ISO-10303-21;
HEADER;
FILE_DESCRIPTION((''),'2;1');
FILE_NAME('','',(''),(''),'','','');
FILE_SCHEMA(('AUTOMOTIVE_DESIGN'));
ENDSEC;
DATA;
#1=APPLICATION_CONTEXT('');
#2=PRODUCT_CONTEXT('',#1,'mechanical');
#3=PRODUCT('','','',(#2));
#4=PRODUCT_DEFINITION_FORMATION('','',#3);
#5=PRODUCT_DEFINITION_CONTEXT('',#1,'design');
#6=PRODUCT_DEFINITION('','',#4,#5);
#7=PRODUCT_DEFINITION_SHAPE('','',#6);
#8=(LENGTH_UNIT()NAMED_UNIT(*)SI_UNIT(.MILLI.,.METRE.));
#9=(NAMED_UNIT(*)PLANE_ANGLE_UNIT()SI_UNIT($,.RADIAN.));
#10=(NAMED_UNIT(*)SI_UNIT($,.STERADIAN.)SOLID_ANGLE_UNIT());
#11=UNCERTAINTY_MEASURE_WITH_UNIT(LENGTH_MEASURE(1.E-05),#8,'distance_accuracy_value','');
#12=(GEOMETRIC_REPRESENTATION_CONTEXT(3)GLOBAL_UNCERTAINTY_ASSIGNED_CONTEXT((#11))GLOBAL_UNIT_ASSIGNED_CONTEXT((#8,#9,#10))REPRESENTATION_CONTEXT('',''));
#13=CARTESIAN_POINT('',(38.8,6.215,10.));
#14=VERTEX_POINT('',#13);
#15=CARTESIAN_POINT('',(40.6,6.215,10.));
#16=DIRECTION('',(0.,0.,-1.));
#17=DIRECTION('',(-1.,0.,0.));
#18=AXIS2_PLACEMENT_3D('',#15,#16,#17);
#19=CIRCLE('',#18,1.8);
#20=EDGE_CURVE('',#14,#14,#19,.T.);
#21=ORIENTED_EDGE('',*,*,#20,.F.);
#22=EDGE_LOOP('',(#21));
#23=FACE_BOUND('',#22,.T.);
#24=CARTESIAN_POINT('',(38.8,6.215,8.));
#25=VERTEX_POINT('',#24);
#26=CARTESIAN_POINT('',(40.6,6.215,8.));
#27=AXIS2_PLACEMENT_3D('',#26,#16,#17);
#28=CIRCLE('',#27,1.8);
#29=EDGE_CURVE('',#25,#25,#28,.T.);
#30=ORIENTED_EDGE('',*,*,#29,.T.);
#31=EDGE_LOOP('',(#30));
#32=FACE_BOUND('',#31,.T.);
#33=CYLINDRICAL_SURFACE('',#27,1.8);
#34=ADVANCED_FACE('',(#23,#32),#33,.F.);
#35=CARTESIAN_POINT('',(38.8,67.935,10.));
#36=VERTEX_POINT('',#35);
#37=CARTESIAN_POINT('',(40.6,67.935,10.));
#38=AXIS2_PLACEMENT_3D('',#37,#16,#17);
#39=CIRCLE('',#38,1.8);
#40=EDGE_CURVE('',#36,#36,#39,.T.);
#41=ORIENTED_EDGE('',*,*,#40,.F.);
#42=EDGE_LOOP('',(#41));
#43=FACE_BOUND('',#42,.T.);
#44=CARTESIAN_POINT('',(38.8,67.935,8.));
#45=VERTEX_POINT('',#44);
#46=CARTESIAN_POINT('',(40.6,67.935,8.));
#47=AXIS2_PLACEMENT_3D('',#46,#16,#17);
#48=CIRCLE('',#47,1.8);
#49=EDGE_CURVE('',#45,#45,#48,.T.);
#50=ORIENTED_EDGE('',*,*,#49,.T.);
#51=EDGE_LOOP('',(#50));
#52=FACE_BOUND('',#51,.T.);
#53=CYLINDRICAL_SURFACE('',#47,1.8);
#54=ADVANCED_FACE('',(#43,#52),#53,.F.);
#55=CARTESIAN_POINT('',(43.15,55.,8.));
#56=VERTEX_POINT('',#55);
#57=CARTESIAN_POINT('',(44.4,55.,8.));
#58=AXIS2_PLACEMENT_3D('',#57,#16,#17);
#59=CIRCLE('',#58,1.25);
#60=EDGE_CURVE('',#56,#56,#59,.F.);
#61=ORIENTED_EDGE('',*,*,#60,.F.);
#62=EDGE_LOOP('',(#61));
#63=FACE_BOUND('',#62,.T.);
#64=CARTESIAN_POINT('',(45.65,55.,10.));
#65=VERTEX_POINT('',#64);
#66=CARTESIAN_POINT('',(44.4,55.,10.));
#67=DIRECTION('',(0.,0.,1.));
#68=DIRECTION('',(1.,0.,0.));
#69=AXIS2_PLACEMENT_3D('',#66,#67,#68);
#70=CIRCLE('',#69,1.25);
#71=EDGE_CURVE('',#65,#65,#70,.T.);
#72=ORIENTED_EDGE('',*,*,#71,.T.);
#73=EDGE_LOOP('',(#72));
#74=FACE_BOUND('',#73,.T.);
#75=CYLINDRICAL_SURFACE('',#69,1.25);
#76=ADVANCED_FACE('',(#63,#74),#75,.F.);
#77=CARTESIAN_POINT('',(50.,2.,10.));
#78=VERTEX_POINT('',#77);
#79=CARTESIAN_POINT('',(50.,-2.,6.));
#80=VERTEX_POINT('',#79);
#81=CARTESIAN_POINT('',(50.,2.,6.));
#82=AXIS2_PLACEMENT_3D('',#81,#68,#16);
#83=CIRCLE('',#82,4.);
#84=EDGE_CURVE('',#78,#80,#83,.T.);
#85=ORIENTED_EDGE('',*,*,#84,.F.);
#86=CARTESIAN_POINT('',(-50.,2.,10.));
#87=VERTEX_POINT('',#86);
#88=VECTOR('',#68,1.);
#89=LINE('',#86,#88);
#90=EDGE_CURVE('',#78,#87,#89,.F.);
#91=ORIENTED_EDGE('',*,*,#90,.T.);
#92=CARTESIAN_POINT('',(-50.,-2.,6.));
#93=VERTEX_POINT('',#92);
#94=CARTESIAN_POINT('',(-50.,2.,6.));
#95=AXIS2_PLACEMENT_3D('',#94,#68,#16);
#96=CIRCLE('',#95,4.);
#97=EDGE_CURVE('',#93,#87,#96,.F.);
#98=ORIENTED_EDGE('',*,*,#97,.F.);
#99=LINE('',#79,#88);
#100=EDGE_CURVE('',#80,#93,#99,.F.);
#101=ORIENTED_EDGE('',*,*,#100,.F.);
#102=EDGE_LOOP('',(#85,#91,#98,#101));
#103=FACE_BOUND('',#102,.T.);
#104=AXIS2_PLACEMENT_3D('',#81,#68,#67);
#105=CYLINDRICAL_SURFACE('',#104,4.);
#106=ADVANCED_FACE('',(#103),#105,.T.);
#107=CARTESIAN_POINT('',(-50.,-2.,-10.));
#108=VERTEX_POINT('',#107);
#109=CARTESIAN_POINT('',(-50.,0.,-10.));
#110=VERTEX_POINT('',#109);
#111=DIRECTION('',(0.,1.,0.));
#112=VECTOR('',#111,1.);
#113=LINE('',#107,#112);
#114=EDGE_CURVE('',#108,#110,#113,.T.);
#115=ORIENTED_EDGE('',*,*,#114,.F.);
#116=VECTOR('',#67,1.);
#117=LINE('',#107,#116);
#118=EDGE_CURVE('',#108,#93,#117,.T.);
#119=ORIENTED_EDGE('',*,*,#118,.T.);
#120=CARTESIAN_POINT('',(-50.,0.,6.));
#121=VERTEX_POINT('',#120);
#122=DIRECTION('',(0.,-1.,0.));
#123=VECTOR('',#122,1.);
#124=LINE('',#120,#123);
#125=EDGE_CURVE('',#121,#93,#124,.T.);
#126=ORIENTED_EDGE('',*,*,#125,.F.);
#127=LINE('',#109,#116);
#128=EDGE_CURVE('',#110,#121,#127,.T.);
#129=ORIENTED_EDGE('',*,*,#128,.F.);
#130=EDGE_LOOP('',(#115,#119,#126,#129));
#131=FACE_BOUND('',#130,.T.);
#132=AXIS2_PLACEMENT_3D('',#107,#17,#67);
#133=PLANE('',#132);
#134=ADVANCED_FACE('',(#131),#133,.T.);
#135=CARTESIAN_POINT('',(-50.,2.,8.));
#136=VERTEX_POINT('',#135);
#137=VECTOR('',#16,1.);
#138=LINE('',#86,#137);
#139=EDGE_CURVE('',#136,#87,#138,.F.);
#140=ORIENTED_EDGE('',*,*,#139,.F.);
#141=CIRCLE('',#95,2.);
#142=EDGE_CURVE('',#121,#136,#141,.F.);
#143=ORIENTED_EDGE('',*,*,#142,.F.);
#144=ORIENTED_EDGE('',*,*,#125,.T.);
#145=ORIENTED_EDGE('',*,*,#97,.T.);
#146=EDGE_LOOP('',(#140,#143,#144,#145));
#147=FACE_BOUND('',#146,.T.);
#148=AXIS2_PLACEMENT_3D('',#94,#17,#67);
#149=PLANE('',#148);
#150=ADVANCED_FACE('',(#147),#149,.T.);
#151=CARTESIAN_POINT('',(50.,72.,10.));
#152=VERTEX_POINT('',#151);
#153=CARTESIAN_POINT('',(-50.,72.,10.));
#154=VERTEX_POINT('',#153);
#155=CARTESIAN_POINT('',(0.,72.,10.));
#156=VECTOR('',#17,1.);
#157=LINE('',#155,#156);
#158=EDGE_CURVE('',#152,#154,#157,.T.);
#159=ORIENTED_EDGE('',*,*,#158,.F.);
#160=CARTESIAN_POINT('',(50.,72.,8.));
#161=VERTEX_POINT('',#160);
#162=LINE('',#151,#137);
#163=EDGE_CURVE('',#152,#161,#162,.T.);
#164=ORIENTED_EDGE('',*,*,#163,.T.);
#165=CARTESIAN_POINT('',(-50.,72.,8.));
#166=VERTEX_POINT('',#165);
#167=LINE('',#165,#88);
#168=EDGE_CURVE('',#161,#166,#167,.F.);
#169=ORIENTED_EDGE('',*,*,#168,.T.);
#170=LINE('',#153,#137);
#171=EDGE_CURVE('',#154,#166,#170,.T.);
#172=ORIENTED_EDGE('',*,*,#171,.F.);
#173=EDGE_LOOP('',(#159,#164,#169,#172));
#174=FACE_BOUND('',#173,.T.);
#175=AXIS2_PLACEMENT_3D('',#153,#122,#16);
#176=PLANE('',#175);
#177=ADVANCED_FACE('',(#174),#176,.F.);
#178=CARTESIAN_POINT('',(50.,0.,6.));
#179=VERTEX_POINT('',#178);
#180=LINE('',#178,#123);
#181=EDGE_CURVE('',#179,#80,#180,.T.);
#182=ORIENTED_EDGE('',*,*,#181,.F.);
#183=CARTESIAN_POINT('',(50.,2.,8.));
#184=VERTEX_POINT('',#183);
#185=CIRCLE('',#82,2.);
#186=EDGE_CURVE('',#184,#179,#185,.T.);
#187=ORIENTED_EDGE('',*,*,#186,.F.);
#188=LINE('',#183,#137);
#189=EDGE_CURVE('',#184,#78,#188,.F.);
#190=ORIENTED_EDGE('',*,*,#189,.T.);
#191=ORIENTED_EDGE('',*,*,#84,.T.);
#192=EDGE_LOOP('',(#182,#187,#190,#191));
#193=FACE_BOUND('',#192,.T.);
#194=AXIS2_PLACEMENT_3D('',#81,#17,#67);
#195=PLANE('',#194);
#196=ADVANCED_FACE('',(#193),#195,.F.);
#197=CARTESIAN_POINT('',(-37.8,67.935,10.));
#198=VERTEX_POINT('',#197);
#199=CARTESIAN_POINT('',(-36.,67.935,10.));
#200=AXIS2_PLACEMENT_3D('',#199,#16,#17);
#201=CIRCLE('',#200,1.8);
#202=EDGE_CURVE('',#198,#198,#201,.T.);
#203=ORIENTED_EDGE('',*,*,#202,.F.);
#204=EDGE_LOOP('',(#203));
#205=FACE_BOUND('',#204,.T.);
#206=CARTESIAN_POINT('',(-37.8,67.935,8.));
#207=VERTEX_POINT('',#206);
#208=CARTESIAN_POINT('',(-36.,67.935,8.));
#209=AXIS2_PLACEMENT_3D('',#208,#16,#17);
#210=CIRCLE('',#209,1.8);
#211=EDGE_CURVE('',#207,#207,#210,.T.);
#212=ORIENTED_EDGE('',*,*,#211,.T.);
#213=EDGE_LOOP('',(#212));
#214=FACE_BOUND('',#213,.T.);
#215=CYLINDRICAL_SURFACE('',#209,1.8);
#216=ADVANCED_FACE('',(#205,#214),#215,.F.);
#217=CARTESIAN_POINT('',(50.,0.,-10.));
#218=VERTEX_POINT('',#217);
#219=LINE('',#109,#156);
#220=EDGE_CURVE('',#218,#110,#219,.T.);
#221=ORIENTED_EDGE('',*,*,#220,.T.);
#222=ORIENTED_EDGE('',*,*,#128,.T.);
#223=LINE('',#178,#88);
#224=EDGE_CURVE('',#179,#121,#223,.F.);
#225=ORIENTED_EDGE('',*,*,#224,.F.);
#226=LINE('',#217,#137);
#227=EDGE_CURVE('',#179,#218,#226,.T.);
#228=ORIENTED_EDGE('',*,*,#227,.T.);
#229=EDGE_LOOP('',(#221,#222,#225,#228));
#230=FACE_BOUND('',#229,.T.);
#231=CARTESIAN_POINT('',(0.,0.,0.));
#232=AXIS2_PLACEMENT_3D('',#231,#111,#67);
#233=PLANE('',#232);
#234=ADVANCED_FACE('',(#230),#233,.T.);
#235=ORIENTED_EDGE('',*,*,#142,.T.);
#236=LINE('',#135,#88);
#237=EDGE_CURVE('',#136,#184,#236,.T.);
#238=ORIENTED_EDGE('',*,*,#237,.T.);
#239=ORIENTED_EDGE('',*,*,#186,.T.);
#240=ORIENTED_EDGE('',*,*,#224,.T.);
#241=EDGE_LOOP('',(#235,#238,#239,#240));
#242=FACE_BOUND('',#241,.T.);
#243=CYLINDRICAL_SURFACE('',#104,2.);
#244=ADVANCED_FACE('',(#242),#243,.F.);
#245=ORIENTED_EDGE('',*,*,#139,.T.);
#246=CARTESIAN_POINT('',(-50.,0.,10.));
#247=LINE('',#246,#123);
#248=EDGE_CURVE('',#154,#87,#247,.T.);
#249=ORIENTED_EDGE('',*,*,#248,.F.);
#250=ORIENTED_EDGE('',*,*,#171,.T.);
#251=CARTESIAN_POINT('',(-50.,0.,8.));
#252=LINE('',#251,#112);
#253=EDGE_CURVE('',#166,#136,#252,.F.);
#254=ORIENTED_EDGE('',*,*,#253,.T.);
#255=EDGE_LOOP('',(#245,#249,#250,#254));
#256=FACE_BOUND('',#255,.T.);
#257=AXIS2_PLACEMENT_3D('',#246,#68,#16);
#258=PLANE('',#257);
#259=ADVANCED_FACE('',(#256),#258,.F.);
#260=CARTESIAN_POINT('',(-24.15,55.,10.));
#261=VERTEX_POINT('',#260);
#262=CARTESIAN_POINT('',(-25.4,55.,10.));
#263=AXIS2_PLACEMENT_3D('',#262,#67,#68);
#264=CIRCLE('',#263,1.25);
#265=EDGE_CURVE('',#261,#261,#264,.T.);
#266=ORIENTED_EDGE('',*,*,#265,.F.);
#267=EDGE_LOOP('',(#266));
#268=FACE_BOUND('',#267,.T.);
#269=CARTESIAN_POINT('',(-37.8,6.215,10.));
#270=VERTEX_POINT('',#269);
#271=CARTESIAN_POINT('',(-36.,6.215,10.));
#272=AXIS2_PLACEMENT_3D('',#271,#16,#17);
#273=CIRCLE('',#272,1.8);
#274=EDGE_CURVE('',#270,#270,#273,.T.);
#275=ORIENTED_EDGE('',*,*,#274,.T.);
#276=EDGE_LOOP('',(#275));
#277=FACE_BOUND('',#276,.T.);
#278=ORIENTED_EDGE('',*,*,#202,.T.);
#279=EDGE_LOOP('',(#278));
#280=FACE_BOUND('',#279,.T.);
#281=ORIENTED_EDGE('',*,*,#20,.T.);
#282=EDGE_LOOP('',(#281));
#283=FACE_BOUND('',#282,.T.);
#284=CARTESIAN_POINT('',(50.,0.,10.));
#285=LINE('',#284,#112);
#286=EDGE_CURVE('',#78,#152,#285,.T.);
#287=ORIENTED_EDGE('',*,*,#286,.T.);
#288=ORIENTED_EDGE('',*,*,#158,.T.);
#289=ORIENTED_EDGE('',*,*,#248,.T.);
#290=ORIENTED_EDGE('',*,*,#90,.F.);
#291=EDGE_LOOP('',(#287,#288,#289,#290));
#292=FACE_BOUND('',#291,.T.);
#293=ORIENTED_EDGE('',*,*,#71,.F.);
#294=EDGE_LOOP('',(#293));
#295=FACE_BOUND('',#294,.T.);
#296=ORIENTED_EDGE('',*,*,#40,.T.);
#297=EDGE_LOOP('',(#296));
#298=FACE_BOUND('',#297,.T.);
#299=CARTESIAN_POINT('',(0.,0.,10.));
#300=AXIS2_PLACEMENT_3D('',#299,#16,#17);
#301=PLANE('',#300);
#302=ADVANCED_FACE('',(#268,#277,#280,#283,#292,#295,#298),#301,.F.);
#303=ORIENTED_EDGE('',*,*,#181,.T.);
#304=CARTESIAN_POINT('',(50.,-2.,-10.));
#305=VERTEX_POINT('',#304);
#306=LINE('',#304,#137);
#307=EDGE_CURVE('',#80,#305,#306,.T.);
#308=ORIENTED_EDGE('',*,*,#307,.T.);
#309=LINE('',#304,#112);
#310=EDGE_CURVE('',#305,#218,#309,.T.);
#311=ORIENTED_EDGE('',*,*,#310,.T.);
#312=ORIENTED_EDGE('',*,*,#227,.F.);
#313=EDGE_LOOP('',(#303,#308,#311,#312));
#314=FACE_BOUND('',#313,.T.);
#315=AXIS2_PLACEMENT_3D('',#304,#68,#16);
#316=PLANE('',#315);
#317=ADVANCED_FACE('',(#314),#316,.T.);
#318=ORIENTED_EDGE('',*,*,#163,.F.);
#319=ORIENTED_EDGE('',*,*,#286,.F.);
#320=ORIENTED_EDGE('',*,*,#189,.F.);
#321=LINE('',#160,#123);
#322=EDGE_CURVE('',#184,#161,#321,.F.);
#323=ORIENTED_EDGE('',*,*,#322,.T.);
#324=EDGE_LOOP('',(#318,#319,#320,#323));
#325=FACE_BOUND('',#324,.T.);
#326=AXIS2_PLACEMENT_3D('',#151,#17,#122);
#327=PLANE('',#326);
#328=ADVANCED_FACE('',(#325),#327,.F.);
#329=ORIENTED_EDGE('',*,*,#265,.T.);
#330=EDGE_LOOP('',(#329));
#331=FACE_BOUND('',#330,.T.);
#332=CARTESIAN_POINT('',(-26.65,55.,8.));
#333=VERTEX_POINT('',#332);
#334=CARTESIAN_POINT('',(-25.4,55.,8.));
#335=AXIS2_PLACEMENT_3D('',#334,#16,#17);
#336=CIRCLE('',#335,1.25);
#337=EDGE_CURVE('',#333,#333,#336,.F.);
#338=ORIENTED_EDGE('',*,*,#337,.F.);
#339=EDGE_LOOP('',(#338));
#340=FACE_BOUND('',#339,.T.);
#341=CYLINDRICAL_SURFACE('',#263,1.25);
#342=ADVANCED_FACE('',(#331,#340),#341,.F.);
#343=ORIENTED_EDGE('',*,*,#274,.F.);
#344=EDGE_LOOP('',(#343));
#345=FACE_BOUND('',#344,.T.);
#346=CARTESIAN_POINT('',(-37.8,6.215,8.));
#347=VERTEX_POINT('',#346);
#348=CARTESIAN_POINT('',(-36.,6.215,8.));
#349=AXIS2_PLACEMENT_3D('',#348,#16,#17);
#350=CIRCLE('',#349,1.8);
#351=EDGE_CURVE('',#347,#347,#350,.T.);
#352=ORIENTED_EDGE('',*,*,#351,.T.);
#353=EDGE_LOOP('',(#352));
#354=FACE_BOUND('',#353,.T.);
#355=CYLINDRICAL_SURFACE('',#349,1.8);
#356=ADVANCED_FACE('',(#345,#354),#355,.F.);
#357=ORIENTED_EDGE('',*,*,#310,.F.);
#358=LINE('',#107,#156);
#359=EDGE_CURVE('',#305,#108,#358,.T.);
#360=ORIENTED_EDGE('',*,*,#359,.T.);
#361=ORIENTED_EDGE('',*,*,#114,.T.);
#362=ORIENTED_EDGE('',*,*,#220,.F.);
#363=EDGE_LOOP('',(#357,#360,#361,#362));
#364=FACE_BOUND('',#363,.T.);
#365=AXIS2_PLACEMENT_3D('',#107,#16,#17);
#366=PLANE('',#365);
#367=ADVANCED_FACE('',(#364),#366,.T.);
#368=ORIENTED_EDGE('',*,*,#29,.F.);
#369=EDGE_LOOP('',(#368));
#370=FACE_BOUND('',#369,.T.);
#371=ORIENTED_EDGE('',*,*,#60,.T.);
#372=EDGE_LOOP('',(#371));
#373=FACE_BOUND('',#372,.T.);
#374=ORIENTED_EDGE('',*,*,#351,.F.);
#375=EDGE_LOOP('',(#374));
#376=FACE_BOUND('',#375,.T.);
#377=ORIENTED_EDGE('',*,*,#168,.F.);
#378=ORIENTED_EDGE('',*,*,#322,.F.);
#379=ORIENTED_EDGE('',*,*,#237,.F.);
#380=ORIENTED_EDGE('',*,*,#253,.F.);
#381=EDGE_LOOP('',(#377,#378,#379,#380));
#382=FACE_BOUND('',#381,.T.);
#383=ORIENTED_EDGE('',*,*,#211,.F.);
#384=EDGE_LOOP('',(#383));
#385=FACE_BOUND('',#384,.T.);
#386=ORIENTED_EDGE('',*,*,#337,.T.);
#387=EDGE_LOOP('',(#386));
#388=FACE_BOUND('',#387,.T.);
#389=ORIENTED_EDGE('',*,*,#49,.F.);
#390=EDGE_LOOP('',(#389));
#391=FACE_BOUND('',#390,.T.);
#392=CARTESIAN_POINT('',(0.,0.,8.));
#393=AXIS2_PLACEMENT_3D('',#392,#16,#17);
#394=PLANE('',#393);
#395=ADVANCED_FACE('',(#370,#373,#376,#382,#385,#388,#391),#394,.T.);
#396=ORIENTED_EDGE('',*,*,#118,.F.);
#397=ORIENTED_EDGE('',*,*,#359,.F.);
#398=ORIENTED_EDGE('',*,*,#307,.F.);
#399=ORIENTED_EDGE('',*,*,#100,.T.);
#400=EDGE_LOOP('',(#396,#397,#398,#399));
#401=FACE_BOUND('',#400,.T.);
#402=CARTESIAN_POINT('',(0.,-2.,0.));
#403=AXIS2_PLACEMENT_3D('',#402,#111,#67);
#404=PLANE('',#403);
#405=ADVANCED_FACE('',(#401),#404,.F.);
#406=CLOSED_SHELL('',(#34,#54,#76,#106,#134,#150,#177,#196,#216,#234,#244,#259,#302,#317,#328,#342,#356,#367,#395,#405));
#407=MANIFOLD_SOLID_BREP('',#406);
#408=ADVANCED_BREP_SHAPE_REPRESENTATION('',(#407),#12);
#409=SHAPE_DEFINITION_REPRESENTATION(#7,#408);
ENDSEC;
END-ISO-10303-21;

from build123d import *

# Parameters (mm, degrees)
SKETCH1_W                    = 100
SKETCH1_H                    = 20
BASE_FLANGE1_DEPTH           = 2
EDGE_FLANGE1_STRIP_W         = 12
EDGE_FLANGE1_STRIP_H         = 2
EDGE_FLANGE1_STRIP_CUT_DEPTH = 100
EDGE_FLANGE1_DEPTH           = 100
M3_5_CLEARANCE_HOLE1_D       = 2.5
M3_CLEARANCE_HOLE1_D         = 3.6


# Sheet-metal steps are written as plain solids
with BuildPart() as part:
    # Sketch1 → Base-Flange1 (new body)
    with BuildSketch(Plane(origin=(0, 0, 0), x_dir=(1, 0, 0), z_dir=(0, 1, 0))):
        Rectangle(SKETCH1_W, SKETCH1_H)
    extrude(amount=-BASE_FLANGE1_DEPTH)

    # Edge-Flange1 strip (across the edge) → Edge-Flange1 strip cut (cut)
    with BuildSketch(Plane(origin=(-50, 0, 10), x_dir=(0, 0, -1), z_dir=(1, 0, 0))):
        with Locations((-2, -1)):
            Rectangle(EDGE_FLANGE1_STRIP_W, EDGE_FLANGE1_STRIP_H)
    extrude(amount=EDGE_FLANGE1_STRIP_CUT_DEPTH, mode=Mode.SUBTRACT)

    # Edge-Flange1 section (across the edge) → Edge-Flange1 (add)
    with BuildSketch(Plane(origin=(-50, 0, 10), x_dir=(0, 0, -1), z_dir=(1, 0, 0))):
        with BuildLine():
            Line((0, 2), (0, 72))
            Line((0, 72), (2, 72))
            Line((2, 72), (2, 2))
            ThreePointArc((2, 2), (2.585786438, 0.585786438), (4, 0))
            Line((4, 0), (4, -2))
            ThreePointArc((4, -2), (1.171572875, -0.828427125), (0, 2))
        make_face()
    extrude(amount=EDGE_FLANGE1_DEPTH)

    # M3.5 Clearance Hole1 (through all)
    with Locations(Plane(origin=(114.471522339, -206.957964235, 10), x_dir=(1, 0, 0), z_dir=(0, 0, 1))):
        with Locations((-139.871522339, 261.957964236), (-70.071522339, 261.957964236)):
            Hole(M3_5_CLEARANCE_HOLE1_D / 2)

    # M3 Clearance Hole1 (through all)
    with Locations(Plane(origin=(114.471522339, -206.957964235, 8), x_dir=(1, 0, 0), z_dir=(0, 0, -1))):
        with Locations((-150.471522339, -274.892964235), (-73.871522339, -274.892964235), (-73.871522339, -213.172964235), (-150.471522339, -213.172964235)):
            Hole(M3_CLEARANCE_HOLE1_D / 2)


solid = part.part
